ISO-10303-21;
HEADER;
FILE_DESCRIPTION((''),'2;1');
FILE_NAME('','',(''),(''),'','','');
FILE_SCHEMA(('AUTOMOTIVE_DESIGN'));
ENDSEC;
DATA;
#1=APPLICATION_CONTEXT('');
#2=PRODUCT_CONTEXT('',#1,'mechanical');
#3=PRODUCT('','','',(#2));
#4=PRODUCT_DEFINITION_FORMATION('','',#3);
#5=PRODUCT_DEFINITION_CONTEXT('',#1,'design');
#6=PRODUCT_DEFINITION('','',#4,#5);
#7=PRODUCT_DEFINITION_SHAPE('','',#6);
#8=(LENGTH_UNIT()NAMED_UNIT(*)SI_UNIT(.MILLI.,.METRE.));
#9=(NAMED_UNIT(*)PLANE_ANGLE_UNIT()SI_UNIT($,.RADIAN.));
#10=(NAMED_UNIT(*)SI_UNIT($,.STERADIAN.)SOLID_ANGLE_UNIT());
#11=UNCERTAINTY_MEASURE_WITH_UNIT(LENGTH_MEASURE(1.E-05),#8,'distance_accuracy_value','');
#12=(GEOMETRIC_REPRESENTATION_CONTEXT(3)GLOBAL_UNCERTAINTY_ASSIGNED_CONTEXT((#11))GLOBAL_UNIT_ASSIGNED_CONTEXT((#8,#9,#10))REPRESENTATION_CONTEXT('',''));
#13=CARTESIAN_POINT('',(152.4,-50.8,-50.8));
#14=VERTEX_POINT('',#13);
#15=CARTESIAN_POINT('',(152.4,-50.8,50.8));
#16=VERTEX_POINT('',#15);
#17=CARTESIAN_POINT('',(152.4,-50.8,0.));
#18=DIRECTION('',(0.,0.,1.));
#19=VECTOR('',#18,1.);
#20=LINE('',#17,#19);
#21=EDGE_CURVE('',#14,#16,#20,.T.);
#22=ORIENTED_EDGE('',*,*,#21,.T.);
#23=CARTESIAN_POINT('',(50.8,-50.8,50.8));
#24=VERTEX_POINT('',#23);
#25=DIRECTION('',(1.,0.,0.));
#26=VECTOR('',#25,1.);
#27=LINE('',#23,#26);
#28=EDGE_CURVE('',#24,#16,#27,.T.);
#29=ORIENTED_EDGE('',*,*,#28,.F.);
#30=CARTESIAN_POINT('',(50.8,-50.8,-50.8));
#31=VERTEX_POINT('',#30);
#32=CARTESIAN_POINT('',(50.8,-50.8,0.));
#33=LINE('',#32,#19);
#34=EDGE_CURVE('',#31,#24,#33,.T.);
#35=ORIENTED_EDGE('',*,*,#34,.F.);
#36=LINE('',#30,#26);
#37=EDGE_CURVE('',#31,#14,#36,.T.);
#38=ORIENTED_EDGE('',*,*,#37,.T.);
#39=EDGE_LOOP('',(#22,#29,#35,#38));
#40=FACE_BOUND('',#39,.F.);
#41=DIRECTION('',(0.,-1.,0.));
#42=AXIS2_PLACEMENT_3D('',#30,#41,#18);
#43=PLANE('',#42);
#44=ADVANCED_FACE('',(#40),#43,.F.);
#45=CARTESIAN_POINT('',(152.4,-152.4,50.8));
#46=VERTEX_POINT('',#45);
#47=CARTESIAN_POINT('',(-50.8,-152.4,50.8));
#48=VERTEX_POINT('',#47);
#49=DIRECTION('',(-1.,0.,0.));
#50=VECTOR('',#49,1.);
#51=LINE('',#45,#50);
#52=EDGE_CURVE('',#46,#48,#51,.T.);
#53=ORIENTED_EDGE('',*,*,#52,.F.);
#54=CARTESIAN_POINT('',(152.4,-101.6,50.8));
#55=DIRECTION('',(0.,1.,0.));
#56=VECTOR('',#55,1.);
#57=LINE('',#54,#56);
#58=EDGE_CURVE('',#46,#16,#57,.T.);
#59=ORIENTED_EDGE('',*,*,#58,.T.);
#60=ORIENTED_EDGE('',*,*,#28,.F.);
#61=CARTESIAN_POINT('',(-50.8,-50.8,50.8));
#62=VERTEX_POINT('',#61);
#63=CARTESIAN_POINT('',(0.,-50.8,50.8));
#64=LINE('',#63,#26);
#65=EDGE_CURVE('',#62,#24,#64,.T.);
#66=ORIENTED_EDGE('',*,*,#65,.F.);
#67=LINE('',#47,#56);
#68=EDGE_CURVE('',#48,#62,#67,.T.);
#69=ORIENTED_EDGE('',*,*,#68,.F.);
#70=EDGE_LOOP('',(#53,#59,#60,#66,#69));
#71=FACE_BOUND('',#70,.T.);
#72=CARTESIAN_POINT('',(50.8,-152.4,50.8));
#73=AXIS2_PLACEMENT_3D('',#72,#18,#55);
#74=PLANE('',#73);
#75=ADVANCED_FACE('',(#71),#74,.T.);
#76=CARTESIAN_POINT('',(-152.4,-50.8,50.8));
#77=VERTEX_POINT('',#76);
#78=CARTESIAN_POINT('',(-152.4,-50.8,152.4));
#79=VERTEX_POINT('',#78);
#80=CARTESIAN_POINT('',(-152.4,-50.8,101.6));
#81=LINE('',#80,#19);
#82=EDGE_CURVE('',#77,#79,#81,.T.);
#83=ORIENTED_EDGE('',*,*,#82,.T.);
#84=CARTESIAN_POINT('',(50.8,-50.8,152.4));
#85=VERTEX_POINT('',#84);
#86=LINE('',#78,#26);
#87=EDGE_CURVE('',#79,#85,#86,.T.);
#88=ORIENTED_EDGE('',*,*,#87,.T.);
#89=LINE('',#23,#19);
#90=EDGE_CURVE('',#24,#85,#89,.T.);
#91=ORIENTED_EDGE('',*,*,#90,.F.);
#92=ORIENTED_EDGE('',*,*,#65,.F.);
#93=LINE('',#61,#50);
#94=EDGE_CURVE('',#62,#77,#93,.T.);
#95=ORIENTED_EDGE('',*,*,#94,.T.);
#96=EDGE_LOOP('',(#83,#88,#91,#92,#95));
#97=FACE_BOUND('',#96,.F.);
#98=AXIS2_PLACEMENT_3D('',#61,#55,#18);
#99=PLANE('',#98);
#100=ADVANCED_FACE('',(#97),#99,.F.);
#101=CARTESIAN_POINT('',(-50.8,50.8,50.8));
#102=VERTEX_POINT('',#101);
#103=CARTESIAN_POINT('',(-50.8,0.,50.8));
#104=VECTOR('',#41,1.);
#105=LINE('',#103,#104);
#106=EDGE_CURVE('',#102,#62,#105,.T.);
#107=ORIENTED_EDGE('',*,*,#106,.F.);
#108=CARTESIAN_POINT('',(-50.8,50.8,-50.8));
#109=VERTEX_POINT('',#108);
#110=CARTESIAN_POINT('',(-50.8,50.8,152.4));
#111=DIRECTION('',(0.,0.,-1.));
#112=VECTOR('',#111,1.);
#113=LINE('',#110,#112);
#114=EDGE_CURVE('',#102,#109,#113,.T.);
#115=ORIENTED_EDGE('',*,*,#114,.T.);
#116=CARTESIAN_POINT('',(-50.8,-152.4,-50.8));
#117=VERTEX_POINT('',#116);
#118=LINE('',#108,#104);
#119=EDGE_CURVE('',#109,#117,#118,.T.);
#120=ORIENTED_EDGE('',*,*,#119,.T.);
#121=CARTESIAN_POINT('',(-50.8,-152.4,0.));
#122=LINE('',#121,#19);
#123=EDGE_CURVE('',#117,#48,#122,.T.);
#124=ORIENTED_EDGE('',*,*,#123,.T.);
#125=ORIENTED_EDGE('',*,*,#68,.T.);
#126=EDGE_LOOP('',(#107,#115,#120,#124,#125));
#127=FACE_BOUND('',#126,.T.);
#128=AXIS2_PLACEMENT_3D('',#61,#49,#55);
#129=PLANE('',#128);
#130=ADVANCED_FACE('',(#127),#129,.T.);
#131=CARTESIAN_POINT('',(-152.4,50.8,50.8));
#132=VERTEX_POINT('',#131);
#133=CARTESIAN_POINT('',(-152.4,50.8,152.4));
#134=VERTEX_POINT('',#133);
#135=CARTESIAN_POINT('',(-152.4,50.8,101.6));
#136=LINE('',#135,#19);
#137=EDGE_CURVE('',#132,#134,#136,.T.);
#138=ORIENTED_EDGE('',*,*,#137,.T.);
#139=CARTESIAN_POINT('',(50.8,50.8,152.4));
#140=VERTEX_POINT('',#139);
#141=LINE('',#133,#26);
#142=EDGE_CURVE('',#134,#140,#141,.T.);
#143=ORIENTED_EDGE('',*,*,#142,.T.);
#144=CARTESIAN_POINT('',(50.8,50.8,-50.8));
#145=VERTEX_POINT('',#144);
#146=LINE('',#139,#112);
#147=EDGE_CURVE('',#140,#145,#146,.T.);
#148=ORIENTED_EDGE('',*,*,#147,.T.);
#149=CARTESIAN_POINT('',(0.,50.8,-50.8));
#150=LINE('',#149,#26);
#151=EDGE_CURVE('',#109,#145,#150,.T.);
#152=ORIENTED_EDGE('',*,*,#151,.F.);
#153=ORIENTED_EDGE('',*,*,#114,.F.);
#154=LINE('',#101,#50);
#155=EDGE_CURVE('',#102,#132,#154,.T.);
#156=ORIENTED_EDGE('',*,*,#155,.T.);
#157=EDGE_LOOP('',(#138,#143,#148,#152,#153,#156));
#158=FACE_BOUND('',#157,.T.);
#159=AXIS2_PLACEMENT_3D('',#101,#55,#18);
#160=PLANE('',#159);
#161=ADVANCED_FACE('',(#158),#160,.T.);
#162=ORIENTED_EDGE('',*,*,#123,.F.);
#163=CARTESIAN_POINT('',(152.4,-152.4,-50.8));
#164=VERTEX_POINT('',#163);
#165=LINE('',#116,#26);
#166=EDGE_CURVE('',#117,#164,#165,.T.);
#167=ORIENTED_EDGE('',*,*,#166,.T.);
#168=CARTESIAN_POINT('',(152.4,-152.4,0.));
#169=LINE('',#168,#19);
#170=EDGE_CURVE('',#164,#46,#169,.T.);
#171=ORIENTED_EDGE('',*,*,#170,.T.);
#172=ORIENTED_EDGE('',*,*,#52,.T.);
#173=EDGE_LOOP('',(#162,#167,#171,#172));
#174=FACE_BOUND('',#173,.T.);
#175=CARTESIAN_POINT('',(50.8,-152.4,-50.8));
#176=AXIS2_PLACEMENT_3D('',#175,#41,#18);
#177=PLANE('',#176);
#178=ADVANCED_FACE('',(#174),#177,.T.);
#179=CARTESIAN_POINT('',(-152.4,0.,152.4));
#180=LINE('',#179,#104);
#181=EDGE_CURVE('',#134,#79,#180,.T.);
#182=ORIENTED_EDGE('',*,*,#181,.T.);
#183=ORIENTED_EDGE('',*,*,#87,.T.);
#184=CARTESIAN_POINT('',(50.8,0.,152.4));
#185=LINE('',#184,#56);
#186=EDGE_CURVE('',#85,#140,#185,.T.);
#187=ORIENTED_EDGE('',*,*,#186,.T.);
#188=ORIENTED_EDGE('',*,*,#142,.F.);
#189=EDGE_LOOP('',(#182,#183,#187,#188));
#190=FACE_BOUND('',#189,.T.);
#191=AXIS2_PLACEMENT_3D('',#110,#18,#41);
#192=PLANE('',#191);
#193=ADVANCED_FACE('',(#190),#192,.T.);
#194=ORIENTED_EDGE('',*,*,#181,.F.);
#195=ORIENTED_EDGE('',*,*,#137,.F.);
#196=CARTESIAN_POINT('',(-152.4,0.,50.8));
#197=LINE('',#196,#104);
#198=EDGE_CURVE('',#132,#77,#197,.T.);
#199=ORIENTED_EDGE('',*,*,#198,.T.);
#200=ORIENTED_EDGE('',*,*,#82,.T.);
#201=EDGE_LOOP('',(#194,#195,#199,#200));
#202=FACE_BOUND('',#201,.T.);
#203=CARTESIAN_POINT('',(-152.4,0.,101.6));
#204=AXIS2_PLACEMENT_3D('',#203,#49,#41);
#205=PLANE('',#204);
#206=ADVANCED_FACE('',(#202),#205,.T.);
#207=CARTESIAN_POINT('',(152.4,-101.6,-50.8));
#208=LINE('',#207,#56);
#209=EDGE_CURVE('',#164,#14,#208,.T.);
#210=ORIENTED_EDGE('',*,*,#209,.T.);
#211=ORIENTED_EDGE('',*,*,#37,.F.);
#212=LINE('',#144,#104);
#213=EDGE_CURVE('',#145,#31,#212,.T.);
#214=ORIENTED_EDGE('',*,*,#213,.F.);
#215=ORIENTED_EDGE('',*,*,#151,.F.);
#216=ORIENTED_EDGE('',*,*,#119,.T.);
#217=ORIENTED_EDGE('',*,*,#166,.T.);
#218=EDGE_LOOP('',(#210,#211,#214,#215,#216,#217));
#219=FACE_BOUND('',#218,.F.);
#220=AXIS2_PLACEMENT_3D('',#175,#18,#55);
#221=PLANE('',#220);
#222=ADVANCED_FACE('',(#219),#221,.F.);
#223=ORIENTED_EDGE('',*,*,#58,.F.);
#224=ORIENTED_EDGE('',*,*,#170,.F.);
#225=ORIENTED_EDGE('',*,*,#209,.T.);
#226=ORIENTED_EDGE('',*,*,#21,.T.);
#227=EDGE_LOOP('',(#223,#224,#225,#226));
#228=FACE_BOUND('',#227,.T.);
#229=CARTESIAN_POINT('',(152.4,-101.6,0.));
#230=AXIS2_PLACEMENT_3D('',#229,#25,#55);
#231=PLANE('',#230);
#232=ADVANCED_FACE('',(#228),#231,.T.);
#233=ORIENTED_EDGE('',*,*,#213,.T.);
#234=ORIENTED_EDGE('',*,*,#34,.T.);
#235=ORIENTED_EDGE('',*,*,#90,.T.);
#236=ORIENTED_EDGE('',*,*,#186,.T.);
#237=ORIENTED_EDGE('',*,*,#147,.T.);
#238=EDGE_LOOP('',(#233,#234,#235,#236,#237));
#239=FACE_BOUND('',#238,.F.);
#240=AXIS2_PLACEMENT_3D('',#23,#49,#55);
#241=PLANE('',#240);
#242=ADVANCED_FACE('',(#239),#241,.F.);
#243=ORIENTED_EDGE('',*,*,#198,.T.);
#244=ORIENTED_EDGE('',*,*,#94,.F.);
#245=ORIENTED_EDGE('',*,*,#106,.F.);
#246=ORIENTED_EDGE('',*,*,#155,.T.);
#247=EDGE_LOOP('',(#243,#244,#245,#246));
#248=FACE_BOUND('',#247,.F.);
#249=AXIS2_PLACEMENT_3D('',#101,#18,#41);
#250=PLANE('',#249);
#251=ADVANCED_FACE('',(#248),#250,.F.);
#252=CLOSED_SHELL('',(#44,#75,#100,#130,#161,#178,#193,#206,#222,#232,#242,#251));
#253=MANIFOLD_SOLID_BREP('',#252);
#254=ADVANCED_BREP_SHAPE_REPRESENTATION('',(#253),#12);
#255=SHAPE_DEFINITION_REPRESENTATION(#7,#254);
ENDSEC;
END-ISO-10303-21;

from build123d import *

# Parameters (mm, degrees)
F1_W      = 101.6
F1_H      = 101.6
F2_DEPTH  = 50.8
F3_W      = 101.6
F3_H      = 101.6
F4_DEPTH  = 101.6
F5_W      = 101.6
F5_H      = 101.6
F6_DEPTH  = 101.6
F7_W      = 101.6
F7_H      = 101.6
F8_DEPTH  = 101.6
F9_W      = 101.6
F9_H      = 101.6
F10_DEPTH = 101.6


# Not quite as in the source:
# - a variable given as a bare number and used for a length is read in inches; the dataset says mm whatever the document's units were


with BuildPart() as f2:
    # F1 (on Front) → F2 (new body, symmetric)
    with BuildSketch(Plane.XZ):
        Rectangle(F1_W, F1_H)
    extrude(amount=F2_DEPTH, both=True)

    # F3 (on face) → F4 (join)
    with BuildSketch(Plane.XZ.offset(50.8)):
        Rectangle(F3_W, F3_H)
    extrude(amount=F4_DEPTH)

    # F5 (on face) → F6 (join)
    with BuildSketch(Plane.YZ.offset(50.8)):
        with Locations((-101.6, 0)):
            Rectangle(F5_W, F5_H)
    extrude(amount=F6_DEPTH)

    # F7 (on face) → F8 (join)
    with BuildSketch(Plane.XY.offset(50.8)):
        Rectangle(F7_W, F7_H)
    extrude(amount=F8_DEPTH)

    # F9 (on face) → F10 (join)
    with BuildSketch(Plane(origin=(-50.8, 0, 0), x_dir=(0, -1, 0), z_dir=(-1, 0, 0))):
        with Locations((0, 101.6)):
            Rectangle(F9_W, F9_H)
    extrude(amount=F10_DEPTH)


solid = f2.part
